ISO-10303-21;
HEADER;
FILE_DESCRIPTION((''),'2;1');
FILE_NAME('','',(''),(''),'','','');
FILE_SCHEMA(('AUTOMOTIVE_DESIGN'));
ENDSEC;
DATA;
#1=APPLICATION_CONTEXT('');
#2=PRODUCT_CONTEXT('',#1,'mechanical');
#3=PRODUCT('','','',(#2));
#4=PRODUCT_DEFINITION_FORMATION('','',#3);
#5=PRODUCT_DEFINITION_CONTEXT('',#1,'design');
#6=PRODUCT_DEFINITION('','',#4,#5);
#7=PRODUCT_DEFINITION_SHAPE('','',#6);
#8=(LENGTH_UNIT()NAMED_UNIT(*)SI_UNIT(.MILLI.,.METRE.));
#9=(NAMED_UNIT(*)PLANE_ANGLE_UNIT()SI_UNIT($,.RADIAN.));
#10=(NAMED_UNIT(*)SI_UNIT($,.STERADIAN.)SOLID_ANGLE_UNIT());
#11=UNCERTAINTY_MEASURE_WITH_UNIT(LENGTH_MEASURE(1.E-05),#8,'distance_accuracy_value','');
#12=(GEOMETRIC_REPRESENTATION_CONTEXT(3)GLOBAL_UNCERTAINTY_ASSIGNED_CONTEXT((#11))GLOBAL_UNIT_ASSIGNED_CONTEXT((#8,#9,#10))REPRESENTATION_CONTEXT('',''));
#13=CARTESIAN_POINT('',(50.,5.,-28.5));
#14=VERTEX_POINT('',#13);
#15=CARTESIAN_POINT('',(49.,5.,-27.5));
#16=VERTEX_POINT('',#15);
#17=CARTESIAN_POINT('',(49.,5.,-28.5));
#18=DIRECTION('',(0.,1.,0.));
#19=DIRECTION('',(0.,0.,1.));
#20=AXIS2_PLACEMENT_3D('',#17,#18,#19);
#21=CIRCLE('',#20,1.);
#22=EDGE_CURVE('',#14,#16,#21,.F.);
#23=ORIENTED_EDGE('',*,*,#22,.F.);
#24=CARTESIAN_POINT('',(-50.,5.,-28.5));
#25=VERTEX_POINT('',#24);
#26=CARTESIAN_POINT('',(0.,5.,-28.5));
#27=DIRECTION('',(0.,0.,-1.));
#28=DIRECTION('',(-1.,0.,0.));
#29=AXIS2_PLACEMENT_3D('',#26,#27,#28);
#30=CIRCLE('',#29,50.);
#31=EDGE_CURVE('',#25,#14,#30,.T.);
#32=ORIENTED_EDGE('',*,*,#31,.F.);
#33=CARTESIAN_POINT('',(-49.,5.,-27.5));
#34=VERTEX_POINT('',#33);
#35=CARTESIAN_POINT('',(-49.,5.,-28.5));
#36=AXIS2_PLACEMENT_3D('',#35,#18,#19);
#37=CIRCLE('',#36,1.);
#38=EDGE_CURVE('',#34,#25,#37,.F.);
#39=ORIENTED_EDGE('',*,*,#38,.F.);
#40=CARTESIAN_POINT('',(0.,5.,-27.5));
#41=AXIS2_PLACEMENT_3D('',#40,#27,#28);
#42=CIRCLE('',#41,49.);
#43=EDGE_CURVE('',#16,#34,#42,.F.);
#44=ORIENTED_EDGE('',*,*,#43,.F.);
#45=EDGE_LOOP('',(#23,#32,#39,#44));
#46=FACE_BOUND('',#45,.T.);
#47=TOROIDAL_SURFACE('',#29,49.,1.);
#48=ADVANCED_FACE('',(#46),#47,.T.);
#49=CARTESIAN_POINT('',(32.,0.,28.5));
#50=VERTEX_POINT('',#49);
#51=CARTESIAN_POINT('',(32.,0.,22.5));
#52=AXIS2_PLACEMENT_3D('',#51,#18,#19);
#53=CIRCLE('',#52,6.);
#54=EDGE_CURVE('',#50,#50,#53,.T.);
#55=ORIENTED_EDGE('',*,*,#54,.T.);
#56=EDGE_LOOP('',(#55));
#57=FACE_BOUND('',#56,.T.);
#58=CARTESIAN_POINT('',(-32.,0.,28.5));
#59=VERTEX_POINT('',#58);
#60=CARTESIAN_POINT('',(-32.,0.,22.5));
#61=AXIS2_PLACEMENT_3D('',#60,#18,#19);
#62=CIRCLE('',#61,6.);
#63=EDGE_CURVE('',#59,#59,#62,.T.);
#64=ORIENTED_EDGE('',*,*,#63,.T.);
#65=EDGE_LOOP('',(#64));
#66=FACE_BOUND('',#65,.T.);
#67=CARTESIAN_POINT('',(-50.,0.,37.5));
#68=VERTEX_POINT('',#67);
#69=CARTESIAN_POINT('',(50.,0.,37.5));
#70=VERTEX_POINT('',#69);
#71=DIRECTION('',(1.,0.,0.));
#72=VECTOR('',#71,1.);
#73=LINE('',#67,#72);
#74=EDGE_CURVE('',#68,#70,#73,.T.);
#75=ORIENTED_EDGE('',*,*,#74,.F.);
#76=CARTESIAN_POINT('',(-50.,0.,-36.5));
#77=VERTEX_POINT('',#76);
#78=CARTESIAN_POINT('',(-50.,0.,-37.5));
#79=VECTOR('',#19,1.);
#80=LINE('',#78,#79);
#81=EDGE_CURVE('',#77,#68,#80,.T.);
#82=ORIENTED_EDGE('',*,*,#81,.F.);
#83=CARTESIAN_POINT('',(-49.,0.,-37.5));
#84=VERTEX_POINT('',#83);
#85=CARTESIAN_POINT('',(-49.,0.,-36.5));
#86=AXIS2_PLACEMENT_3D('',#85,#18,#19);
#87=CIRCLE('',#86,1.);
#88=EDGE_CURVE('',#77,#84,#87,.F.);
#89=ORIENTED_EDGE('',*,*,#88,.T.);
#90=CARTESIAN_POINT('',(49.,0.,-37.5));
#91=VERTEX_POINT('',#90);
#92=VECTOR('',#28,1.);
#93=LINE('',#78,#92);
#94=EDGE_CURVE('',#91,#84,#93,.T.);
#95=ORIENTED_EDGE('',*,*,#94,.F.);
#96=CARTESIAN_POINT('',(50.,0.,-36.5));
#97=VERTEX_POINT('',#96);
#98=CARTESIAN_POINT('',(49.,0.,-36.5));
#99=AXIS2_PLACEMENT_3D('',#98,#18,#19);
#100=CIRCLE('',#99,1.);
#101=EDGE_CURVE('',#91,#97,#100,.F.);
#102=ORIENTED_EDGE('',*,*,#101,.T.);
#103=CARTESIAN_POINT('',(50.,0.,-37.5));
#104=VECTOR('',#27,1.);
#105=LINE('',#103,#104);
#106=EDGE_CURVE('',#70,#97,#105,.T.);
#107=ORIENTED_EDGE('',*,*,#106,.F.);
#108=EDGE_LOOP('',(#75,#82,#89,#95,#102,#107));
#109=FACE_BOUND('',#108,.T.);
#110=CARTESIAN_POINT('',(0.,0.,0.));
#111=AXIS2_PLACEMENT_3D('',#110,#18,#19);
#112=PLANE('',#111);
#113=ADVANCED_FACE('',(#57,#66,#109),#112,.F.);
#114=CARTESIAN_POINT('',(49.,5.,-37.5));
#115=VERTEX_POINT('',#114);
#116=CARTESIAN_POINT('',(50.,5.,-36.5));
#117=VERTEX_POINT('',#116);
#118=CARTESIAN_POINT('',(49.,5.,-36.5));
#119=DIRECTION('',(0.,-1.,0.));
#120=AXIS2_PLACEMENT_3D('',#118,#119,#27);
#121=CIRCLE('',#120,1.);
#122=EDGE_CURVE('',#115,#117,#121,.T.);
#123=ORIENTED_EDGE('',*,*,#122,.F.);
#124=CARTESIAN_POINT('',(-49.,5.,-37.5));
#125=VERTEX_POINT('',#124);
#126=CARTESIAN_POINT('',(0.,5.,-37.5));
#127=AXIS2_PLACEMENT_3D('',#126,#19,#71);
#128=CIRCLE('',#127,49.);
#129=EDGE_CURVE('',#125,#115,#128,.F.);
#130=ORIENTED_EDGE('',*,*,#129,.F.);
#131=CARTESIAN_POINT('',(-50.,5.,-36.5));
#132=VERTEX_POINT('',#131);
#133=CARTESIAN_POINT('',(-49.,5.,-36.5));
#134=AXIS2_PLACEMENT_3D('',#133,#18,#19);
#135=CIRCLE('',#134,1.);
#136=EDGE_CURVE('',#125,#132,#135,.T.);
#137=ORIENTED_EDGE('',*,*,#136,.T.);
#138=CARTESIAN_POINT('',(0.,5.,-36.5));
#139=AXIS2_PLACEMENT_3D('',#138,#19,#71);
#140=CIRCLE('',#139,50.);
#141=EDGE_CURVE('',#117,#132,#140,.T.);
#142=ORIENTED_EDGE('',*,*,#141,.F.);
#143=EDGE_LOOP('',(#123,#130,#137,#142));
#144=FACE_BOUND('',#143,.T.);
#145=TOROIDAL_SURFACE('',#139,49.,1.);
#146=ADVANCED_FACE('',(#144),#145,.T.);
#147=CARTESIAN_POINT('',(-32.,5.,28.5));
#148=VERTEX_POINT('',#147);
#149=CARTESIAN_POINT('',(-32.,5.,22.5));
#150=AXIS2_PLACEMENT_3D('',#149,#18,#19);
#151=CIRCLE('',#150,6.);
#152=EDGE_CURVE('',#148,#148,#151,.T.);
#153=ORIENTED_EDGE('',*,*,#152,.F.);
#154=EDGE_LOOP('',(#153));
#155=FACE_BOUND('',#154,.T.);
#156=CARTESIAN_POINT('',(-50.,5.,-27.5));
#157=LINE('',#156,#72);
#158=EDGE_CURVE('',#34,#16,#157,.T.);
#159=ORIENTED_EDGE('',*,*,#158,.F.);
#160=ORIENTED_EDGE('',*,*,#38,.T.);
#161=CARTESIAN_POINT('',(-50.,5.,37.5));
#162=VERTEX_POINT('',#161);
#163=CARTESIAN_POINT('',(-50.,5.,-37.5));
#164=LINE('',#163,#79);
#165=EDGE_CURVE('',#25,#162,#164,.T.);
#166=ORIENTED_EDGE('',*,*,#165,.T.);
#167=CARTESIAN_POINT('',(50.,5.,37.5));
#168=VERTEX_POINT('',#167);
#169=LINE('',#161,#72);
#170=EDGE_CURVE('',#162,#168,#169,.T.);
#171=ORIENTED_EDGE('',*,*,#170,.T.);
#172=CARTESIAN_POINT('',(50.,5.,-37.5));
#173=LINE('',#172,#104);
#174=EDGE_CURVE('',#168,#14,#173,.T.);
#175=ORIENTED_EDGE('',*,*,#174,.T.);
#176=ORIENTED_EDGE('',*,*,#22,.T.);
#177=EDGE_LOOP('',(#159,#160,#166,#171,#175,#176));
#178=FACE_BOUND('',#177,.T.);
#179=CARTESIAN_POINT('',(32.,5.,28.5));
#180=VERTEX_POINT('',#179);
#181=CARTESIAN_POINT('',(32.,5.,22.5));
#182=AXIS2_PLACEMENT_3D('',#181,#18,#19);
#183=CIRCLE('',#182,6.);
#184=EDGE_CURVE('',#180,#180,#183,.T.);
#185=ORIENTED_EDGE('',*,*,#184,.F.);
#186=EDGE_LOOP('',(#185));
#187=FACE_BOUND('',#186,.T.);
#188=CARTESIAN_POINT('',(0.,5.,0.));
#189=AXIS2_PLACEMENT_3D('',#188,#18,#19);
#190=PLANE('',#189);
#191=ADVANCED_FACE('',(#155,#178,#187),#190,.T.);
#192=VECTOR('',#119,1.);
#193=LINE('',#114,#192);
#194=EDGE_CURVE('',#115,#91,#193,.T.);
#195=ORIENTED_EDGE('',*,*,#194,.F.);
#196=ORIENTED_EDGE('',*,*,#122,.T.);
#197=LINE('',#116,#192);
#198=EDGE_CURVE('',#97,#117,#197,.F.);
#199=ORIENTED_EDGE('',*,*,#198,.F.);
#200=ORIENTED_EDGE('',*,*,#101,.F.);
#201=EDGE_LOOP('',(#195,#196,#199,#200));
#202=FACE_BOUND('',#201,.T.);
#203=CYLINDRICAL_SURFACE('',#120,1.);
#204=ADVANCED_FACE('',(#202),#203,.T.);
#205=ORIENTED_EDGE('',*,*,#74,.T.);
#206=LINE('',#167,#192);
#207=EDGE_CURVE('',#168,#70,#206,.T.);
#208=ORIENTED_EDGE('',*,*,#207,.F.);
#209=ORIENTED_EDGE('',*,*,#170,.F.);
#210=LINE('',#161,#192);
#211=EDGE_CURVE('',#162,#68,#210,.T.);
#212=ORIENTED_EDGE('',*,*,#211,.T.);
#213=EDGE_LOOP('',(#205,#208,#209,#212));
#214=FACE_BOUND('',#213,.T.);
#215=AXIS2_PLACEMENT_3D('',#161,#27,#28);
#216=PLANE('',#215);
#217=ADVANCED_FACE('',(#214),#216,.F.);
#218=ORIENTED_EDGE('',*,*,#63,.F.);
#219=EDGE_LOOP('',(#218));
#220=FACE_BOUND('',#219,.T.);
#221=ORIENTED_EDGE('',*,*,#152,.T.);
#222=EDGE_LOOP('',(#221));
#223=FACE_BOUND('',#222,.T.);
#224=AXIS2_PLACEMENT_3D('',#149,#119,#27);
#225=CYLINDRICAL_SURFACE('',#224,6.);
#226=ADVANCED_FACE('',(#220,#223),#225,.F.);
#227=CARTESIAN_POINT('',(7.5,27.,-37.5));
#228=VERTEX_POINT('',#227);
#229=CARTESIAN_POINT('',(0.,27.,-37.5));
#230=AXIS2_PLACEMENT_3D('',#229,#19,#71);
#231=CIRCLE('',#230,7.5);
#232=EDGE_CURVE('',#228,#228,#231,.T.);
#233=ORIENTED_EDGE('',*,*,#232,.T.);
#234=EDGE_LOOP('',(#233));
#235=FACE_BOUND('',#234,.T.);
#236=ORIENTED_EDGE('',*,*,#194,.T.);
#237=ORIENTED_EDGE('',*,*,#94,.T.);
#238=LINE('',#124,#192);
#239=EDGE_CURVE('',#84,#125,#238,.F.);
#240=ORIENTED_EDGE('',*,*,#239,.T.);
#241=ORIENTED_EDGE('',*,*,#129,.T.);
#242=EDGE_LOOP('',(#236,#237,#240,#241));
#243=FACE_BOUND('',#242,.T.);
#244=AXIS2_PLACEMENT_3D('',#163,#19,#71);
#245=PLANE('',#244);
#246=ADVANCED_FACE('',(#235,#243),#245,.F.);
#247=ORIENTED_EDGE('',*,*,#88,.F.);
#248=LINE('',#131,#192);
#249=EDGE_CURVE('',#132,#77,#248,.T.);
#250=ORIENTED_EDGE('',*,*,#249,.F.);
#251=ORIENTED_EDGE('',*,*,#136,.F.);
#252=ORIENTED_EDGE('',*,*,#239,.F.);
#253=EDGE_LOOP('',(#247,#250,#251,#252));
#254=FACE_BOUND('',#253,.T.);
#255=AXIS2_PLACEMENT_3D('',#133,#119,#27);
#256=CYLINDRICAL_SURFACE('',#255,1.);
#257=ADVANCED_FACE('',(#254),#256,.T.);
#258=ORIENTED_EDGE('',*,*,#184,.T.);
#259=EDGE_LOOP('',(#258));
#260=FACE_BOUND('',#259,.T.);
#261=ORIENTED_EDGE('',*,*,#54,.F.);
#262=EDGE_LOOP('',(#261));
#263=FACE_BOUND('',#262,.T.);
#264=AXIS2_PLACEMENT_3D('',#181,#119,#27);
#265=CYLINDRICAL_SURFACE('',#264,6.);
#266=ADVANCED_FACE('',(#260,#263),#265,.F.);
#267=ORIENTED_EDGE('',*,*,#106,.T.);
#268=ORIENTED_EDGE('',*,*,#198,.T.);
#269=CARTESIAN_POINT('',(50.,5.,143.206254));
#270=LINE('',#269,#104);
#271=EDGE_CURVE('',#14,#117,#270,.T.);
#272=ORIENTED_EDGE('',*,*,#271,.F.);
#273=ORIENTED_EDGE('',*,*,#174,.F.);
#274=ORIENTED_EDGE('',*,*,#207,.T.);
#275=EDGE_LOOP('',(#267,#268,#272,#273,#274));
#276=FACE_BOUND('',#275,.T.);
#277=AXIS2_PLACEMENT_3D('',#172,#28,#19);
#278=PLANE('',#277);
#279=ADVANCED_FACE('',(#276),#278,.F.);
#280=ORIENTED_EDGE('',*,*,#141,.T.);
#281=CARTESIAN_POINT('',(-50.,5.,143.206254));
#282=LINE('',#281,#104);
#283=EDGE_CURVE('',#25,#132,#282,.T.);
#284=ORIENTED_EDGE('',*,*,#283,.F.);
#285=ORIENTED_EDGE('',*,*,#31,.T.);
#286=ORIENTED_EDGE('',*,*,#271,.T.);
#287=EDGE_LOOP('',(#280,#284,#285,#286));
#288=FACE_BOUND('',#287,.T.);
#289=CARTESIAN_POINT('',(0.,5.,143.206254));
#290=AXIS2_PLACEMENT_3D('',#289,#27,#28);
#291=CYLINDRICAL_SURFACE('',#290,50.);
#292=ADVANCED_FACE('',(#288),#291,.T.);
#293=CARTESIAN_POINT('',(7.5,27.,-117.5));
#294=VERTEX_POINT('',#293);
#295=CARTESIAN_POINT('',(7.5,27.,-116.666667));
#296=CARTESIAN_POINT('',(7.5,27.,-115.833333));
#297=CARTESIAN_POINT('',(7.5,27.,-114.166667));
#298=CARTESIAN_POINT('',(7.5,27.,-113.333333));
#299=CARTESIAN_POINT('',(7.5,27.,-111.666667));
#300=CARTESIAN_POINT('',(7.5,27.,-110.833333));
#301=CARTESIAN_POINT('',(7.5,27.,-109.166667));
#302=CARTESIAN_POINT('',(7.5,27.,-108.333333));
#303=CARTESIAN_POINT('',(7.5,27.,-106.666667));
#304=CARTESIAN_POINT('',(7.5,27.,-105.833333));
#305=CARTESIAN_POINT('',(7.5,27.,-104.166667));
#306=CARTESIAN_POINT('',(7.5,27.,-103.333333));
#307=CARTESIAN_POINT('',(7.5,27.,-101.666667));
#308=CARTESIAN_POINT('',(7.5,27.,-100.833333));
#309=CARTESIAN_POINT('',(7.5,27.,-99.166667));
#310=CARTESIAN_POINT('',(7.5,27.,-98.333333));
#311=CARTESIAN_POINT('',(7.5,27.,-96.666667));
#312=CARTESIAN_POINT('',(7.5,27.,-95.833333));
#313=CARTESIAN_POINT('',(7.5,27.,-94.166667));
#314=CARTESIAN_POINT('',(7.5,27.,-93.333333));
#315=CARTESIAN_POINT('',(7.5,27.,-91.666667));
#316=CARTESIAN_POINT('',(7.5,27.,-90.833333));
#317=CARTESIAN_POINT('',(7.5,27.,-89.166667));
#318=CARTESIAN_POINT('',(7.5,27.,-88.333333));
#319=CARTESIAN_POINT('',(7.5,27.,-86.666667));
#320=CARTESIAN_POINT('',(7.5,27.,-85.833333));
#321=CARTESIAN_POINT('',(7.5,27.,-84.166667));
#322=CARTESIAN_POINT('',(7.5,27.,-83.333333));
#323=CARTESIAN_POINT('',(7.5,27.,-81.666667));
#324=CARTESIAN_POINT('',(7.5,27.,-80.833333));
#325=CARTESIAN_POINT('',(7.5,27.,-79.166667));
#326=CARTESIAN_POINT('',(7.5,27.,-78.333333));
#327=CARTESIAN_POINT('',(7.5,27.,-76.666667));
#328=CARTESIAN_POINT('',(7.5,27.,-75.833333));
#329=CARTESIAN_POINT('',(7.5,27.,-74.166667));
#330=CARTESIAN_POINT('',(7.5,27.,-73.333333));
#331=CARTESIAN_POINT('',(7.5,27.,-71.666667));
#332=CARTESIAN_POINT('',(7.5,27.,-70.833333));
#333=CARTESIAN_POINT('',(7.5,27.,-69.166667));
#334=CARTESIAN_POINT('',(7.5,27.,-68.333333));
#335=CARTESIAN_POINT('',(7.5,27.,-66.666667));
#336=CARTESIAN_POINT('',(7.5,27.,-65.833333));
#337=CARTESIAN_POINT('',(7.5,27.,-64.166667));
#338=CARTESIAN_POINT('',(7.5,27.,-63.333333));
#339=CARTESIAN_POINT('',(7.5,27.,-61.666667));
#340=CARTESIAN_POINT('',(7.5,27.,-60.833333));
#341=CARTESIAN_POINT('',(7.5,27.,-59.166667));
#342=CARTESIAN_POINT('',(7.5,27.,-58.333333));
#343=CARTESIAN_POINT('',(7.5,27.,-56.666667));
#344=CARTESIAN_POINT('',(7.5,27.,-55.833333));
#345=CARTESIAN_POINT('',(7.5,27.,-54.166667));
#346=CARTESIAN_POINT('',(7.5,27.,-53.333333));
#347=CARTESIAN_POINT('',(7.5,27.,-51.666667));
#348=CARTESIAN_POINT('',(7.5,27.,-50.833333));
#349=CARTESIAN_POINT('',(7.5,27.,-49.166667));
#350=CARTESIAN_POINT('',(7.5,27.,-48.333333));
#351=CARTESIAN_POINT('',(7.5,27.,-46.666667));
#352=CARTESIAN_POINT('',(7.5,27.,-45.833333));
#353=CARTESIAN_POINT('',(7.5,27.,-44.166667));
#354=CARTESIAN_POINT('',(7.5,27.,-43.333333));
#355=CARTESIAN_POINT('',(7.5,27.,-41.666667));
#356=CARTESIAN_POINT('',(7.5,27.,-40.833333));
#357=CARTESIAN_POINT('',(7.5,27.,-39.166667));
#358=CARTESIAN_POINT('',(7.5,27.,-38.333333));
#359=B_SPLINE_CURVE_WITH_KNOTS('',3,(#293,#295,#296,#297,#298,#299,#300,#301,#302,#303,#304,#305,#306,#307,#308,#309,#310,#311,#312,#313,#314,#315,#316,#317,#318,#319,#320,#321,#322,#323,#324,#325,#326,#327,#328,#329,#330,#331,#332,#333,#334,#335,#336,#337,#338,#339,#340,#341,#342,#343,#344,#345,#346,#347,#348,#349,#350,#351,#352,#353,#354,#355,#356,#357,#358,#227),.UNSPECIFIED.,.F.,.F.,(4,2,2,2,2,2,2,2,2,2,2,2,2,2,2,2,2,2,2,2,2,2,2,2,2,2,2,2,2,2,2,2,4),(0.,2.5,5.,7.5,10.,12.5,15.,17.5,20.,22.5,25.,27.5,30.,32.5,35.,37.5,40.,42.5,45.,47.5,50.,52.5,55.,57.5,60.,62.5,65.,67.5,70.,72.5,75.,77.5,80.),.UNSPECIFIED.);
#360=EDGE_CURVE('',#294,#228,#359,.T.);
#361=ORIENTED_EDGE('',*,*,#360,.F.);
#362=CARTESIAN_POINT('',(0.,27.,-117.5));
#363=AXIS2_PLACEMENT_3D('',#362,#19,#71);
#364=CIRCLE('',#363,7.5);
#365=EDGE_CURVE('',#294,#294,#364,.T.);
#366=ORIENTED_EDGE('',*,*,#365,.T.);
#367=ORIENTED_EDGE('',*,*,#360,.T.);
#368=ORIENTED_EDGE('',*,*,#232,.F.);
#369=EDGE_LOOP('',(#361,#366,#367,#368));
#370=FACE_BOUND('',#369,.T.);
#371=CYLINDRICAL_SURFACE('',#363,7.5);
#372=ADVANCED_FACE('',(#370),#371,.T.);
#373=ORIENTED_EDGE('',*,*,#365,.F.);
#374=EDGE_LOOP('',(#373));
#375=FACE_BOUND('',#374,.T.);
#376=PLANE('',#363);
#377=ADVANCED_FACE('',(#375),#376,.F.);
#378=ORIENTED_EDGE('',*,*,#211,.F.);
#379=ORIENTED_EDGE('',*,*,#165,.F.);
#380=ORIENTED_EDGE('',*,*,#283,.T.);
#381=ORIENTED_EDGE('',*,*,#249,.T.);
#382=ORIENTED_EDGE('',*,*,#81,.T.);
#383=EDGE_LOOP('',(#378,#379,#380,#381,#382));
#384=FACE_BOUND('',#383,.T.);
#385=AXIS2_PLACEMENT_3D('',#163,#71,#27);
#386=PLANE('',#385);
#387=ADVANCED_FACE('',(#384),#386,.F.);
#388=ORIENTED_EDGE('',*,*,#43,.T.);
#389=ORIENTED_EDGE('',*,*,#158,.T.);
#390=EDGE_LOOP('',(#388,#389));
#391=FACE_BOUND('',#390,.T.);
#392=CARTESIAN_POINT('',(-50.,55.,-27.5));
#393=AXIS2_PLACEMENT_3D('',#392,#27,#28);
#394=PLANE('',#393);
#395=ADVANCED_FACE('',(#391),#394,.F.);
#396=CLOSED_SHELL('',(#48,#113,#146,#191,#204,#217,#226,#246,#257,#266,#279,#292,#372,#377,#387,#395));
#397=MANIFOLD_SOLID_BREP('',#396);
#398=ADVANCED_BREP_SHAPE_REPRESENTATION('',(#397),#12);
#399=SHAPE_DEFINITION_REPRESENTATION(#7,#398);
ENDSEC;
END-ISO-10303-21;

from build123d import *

# Parameters (mm, degrees)
SKETCH2_W           = 100
SKETCH2_H           = 75
SKETCH2_R           = 6
BOSS_EXTRUDE1_DEPTH = 5
SKETCH3_W           = 100
SKETCH3_H           = 10
BOSS_EXTRUDE2_DEPTH = 50
CUT_EXTRUDE2_START  = -10
CUT_EXTRUDE2_DEPTH  = 10
FILLET1_R           = 1
FILLET2_R           = 1
SKETCH6_R           = 7.5
BOSS_EXTRUDE3_DEPTH = 90


# Read off the part's stored shape, not the designer's step: Cut-Extrude2
with BuildPart() as part:
    # Sketch2 → Boss-Extrude1 (new body)
    with BuildSketch(Plane(origin=(0, 0, 0), x_dir=(1, 0, 0), z_dir=(0, 1, 0))):
        Rectangle(SKETCH2_W, SKETCH2_H)
        with Locations(Location((-32, -22.5, 0), (0, 0, 270))):
            Circle(SKETCH2_R, mode=Mode.SUBTRACT)
        with Locations(Location((32, -22.5, 0), (0, 0, 270))):
            Circle(SKETCH2_R, mode=Mode.SUBTRACT)
    extrude(amount=BOSS_EXTRUDE1_DEPTH)

    # Sketch3 → Boss-Extrude2 (add)
    with BuildSketch(Plane(origin=(0, 5, 0), x_dir=(1, 0, 0), z_dir=(0, 1, 0))):
        with Locations((0, 32.5)):
            Rectangle(SKETCH3_W, SKETCH3_H)
    extrude(amount=BOSS_EXTRUDE2_DEPTH)

    # Cut-Extrude2 outline → Cut-Extrude2 (cut)
    with BuildSketch(Plane.XY.offset(-27.5).offset(CUT_EXTRUDE2_START)):
        with BuildLine():
            Line((-50, 55), (-50, 5))
            ThreePointArc((-50, 5), (-35.355339097, 40.355339022), (-1.05e-07, 55))
            Line((-1.05e-07, 55), (-50, 55))
        make_face()
        with BuildLine():
            Line((50, 55), (-1.05e-07, 55))
            ThreePointArc((-1.05e-07, 55), (35.355339022, 40.355339097), (50, 5))
            Line((50, 5), (50, 55))
        make_face()
    extrude(amount=CUT_EXTRUDE2_DEPTH, mode=Mode.SUBTRACT)

    # Fillet1
    fillet1_edges = [part.edges().sort_by_distance(p)[0] for p in [
        (-50, 2.5, -37.5),
        (50, 2.5, -37.5),
        (35.355339022, 40.355339097, -37.5),
    ]]
    fillet(fillet1_edges, radius=FILLET1_R)

    # Fillet2
    fillet2_edges = [part.edges().sort_by_distance(p)[0] for p in [
        (35.355339022, 40.355339097, -27.5),
    ]]
    fillet(fillet2_edges, radius=FILLET2_R)

    # Sketch6 → Boss-Extrude3 (add)
    with BuildSketch(Plane.XY.offset(-27.5)):
        with Locations((0, 27)):
            Circle(SKETCH6_R)
    extrude(amount=-BOSS_EXTRUDE3_DEPTH)


solid = part.part
